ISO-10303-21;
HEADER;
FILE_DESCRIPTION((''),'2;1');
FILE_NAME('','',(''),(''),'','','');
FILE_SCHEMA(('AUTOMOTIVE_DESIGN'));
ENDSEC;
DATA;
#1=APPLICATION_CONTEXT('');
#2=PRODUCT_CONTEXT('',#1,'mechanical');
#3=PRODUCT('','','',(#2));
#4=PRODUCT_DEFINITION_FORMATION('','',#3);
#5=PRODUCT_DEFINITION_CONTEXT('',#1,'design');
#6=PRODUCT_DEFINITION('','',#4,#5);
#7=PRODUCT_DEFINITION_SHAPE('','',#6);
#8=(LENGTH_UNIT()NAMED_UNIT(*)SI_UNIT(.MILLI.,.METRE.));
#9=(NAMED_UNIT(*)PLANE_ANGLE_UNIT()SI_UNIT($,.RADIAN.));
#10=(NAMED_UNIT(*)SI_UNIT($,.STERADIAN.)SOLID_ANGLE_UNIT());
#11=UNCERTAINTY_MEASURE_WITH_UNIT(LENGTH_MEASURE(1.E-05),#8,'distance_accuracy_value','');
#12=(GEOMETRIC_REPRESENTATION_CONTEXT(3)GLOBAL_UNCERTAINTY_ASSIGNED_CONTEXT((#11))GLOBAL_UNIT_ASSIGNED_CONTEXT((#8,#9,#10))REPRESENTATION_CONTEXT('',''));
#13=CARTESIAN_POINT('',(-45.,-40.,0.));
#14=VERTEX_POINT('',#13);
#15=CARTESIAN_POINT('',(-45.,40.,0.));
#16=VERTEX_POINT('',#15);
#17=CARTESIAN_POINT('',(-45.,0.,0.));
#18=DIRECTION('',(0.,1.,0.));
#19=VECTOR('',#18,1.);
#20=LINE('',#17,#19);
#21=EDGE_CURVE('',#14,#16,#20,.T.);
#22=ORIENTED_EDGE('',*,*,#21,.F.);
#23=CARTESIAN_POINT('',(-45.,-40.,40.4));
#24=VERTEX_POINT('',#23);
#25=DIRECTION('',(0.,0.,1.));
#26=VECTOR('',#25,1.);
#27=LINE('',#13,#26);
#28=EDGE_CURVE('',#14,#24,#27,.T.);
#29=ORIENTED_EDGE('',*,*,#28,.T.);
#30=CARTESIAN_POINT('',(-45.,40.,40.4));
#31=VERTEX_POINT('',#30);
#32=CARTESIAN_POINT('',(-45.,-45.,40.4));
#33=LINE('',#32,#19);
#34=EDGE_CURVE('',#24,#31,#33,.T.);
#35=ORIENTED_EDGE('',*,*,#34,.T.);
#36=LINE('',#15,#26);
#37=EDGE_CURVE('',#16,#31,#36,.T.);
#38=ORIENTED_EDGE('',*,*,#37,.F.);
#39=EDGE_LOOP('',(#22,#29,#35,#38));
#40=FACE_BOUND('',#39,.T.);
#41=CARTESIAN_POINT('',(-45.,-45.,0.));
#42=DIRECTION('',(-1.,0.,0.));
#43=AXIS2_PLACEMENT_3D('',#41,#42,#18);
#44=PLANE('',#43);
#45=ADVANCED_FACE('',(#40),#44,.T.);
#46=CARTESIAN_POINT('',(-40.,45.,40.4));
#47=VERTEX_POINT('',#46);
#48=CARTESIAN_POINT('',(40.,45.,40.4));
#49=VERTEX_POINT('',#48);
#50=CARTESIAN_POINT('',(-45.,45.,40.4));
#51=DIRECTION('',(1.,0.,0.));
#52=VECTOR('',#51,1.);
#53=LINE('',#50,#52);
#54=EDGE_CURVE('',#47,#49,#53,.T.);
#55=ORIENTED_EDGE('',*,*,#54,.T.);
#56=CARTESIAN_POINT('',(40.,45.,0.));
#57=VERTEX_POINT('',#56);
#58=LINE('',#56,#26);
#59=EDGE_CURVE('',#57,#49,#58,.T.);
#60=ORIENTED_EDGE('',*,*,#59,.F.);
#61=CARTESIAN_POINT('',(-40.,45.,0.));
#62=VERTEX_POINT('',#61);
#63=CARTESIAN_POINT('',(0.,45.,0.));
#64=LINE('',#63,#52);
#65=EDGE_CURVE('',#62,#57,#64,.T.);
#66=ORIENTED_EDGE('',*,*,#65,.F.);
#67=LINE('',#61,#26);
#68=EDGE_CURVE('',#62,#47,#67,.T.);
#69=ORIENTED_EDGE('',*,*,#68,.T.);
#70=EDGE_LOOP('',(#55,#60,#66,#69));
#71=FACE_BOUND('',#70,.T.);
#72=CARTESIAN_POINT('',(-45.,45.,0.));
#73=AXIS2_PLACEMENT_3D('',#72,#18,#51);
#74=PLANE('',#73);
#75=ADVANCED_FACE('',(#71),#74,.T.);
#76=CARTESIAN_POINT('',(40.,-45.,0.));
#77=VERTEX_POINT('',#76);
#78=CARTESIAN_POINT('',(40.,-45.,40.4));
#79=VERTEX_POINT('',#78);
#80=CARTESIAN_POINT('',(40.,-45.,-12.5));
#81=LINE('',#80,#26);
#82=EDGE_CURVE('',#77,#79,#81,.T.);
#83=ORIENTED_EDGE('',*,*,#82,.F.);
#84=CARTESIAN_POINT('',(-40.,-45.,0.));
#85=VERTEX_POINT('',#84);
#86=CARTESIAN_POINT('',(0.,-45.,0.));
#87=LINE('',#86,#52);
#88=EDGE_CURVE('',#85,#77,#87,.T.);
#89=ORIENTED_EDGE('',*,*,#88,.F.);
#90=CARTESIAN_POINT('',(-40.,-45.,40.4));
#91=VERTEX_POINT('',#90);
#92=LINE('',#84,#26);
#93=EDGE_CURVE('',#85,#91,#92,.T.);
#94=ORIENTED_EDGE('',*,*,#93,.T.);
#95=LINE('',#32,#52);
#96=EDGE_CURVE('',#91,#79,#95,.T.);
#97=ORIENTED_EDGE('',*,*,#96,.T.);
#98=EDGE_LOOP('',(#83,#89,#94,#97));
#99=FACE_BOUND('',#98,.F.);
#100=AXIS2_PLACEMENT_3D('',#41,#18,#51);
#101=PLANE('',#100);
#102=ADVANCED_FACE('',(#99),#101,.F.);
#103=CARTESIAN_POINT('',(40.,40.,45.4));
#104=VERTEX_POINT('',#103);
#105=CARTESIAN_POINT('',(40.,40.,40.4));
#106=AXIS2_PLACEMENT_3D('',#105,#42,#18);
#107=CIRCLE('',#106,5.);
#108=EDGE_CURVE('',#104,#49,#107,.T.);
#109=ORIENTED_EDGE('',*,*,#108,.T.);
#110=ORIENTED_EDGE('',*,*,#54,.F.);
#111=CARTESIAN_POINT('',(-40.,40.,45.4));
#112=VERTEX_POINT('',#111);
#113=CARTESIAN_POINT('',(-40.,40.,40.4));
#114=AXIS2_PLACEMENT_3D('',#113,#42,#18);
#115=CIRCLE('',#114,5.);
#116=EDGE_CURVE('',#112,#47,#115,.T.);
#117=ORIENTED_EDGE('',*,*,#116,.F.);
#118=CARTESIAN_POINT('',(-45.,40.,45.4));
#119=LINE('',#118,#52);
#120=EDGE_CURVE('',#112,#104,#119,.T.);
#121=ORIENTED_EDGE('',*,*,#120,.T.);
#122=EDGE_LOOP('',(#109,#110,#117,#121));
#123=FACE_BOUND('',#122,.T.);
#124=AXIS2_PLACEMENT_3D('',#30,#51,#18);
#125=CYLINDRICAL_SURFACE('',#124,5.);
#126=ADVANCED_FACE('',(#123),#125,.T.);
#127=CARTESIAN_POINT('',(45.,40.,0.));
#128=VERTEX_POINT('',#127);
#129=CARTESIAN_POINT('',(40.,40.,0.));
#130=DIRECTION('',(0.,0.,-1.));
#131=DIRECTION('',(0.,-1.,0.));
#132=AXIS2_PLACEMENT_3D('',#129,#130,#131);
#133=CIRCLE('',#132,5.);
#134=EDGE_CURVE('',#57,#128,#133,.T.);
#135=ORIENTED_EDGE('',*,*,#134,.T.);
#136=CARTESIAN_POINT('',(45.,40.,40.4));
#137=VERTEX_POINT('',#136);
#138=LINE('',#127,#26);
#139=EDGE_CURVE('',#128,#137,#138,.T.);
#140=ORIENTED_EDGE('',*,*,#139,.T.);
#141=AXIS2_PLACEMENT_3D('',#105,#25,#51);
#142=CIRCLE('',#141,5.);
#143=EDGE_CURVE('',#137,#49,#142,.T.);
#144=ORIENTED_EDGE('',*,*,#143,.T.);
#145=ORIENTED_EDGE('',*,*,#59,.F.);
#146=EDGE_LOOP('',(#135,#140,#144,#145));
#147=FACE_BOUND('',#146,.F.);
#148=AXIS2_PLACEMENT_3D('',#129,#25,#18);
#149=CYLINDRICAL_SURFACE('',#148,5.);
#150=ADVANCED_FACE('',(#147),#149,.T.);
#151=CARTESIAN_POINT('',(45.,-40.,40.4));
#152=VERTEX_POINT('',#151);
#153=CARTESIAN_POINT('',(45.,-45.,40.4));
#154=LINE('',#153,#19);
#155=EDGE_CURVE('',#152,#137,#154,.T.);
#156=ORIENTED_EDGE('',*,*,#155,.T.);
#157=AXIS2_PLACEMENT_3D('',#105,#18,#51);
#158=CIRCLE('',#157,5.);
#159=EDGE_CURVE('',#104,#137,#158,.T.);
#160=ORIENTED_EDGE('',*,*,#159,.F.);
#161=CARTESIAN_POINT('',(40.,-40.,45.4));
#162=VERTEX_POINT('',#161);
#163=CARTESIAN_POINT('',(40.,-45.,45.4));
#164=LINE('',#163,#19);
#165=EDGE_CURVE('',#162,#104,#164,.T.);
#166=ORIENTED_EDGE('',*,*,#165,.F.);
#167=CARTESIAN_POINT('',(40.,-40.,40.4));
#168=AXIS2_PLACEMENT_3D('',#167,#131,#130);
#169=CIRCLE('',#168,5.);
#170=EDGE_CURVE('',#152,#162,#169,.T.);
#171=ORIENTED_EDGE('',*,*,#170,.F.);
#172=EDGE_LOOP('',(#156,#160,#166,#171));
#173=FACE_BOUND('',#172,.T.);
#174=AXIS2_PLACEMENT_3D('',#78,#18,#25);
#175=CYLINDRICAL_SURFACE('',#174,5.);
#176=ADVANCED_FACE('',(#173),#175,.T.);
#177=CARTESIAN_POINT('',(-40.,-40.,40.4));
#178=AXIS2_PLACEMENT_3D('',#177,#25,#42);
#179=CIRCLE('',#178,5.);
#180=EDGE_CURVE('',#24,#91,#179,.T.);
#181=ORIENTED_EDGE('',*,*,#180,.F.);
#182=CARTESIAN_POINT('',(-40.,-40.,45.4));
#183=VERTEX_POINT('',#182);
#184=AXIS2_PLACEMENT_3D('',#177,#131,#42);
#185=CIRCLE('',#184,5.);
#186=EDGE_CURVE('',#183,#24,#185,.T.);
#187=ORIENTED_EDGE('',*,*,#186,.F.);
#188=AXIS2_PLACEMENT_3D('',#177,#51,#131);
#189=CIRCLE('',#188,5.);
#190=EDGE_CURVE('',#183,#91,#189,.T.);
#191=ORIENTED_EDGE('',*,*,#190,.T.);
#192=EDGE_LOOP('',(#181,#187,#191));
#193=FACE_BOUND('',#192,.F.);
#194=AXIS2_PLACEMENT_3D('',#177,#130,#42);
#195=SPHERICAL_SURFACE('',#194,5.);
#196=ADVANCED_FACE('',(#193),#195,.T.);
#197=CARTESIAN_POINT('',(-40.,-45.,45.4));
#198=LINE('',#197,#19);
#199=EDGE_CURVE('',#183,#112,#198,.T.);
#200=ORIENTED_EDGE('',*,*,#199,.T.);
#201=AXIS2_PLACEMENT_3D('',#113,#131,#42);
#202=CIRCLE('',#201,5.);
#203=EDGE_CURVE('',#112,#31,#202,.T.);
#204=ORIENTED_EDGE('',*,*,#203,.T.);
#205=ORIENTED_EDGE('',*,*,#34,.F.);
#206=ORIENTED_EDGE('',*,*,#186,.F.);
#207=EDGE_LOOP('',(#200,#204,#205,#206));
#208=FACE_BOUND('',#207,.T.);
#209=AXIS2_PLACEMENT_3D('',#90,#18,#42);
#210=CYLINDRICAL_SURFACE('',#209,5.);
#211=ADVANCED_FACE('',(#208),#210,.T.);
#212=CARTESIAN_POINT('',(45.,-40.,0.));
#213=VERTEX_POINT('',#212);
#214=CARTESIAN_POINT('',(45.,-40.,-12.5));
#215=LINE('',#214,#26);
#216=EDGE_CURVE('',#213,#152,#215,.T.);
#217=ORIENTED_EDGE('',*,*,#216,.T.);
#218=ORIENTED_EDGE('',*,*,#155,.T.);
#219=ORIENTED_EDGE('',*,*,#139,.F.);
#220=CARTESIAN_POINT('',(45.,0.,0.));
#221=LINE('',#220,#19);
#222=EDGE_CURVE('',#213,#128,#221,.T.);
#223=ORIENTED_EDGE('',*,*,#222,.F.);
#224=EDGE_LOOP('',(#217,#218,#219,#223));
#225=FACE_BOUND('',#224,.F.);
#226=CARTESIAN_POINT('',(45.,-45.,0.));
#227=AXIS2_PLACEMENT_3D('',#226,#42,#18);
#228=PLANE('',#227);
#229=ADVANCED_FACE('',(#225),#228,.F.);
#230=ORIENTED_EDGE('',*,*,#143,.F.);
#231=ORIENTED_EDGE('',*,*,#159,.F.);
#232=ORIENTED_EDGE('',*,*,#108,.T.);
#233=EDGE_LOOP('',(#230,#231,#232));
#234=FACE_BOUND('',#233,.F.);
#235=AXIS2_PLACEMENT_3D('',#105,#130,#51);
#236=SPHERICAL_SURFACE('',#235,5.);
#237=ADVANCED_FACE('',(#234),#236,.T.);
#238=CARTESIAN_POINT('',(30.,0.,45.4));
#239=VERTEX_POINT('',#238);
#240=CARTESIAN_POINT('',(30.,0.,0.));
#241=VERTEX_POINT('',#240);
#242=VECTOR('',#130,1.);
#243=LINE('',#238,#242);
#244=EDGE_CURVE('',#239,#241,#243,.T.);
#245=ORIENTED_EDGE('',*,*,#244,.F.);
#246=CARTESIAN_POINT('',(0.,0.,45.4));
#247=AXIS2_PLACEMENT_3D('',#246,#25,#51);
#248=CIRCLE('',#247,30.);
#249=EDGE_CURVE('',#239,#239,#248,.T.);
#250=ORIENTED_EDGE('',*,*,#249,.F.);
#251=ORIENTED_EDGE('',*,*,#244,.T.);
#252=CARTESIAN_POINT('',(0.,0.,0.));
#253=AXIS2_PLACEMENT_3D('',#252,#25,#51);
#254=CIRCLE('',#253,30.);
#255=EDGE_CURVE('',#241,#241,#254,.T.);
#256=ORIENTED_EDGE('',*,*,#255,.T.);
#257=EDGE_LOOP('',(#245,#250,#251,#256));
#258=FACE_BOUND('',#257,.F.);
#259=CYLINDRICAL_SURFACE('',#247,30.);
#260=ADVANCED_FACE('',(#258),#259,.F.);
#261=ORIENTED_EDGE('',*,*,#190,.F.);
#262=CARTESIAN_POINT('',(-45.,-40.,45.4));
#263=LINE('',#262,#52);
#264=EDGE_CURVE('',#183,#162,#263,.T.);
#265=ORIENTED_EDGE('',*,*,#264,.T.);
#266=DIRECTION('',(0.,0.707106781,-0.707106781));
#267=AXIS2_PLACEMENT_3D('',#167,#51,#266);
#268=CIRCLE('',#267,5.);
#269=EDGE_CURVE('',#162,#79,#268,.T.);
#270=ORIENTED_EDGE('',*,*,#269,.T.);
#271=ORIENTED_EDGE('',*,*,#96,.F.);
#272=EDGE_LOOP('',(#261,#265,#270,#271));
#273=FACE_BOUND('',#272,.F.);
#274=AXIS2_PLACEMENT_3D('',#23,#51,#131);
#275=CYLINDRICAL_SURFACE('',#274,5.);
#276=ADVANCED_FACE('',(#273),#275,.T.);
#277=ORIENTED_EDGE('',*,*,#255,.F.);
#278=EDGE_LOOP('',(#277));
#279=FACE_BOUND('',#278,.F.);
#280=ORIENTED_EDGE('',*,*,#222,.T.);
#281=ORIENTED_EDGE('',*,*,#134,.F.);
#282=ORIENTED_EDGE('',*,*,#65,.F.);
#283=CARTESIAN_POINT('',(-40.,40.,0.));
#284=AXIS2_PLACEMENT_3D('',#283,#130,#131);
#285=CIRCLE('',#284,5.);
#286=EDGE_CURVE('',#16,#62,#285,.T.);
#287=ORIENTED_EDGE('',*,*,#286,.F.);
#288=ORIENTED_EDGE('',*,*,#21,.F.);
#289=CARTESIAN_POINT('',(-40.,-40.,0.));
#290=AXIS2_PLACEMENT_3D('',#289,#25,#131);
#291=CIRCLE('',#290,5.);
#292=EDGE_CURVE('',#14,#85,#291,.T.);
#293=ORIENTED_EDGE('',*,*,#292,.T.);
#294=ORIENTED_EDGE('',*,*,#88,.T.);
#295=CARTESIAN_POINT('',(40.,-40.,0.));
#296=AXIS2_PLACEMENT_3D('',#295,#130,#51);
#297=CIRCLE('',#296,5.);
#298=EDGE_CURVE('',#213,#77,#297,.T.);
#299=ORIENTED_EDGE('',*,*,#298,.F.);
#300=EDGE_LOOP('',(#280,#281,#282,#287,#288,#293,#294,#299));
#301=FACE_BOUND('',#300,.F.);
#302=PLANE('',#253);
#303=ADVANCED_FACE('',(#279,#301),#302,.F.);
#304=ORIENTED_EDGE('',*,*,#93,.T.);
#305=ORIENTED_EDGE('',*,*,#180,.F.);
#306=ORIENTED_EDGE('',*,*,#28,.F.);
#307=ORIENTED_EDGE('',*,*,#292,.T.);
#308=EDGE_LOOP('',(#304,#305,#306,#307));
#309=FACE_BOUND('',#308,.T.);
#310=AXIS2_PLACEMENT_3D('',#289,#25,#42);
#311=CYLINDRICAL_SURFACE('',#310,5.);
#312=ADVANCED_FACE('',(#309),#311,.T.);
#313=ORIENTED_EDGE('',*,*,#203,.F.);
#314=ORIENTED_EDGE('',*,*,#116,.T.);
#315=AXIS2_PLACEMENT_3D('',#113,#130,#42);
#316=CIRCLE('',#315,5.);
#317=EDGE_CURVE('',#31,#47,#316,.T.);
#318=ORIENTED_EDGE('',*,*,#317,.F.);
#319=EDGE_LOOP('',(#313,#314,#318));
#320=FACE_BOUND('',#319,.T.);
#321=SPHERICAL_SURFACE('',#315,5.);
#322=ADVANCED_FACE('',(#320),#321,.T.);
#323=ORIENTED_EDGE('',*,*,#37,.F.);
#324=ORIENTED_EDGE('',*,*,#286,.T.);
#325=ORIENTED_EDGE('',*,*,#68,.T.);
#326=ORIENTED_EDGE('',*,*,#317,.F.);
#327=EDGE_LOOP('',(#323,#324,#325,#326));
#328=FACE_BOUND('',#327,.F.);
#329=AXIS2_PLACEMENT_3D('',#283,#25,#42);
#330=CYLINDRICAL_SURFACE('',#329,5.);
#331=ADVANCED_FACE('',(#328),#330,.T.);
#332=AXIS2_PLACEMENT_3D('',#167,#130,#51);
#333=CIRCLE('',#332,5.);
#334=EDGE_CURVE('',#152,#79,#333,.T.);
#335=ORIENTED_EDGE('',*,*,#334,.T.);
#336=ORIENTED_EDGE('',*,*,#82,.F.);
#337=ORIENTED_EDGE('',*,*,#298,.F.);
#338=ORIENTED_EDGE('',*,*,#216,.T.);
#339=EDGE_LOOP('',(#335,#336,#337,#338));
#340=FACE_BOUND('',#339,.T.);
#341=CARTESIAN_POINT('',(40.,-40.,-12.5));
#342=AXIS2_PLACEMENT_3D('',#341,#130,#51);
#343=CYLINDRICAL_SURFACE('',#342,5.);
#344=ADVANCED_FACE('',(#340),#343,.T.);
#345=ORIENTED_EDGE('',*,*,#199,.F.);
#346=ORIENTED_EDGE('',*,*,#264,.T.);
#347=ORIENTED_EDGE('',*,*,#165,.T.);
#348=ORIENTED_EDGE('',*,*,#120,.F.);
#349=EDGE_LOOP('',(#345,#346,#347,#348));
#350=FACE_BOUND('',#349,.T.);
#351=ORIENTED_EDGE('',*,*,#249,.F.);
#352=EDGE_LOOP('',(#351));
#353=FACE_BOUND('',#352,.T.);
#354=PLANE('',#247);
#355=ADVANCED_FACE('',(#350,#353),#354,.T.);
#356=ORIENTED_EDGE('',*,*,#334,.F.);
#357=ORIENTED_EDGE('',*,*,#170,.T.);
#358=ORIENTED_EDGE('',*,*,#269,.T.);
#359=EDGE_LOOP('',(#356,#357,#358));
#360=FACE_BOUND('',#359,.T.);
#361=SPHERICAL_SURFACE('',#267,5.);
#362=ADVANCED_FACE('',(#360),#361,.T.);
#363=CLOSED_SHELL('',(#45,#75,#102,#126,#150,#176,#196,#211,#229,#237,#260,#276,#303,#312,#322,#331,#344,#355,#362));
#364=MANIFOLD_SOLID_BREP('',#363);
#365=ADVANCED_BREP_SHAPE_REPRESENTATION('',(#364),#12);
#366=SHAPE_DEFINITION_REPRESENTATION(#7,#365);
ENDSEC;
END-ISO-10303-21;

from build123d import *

# Parameters (mm, degrees)
F0_W        = 90
F0_H        = 90
F1_DEPTH    = 45.4
F2_R        = 30
F3_DEPTH    = 45.401
F4_R        = 5
F5_T1_DEPTH = 52.9
F5_S5_W     = 5
F5_S5_H     = 5
F5_T6_DEPTH = 5


# Not quite as in the source:
# - a fillet or chamfer that OpenCascade refuses, or shapes differently, is made with other operations: its cross-section is extruded or revolved along the edge and cut away or added


with BuildPart() as f1:
    # F0 (on Top) → F1 (new body)
    with BuildSketch(Plane.XY):
        Rectangle(F0_W, F0_H)
    extrude(amount=F1_DEPTH)

    # F2 (on face) → F3 (cut, through all)
    with BuildSketch(Plane.XY.offset(45.4)):
        Circle(F2_R)
    extrude(amount=-F3_DEPTH, mode=Mode.SUBTRACT)

    # F4
    f4_edges = [f1.edges().sort_by_distance(p)[0] for p in [
        (-45, 45, 22.7),
        (-45, -45, 22.7),
        (45, 45, 22.7),
        (45, 0, 45.4),
        (-45, 0, 45.4),
        (0, 45, 45.4),
        (0, -45, 45.4),
    ]]
    fillet(f4_edges, radius=F4_R)

    # F5: fillet of radius 5 on 1 edges, made by hand

    # F5_s2 → F5_t1 (cut)
    with BuildSketch(Plane.XY.offset(-12.5)):
        with BuildLine():
            ThreePointArc((45, -40), (43.5355339059, -43.5355339059), (40, -45))
            Line((40, -45), (45, -45))
            Line((45, -45), (45, -40))
        make_face()
    extrude(amount=F5_T1_DEPTH, mode=Mode.SUBTRACT)


with BuildPart() as f5_tool4:
    # F5_s5 → F5_t6 (new body)
    with BuildSketch(Plane.YZ.offset(40)):
        with Locations((-42.5, 42.9)):
            Rectangle(F5_S5_W, F5_S5_H)
    extrude(amount=F5_T6_DEPTH)

    # F5_s7 → F5_t8 (revolve, cut)
    with BuildSketch(Plane(origin=(40, -40, 40.4), x_dir=(0, 0.7071067812, -0.7071067812), z_dir=(0, -0.7071067812, -0.7071067812))):
        with BuildLine():
            ThreePointArc((0, -5), (5, 0), (0, 5))
            Line((0, 5), (0, -5))
        make_face()
    revolve(axis=Axis((40, -40, 40.4), (1, 0, 0)), mode=Mode.SUBTRACT)


with BuildPart() as f1_1:
    add(f1.part)

    # F5_t3: cut F5_tool4
    add(f5_tool4.part, mode=Mode.SUBTRACT)


solid = f1_1.part
